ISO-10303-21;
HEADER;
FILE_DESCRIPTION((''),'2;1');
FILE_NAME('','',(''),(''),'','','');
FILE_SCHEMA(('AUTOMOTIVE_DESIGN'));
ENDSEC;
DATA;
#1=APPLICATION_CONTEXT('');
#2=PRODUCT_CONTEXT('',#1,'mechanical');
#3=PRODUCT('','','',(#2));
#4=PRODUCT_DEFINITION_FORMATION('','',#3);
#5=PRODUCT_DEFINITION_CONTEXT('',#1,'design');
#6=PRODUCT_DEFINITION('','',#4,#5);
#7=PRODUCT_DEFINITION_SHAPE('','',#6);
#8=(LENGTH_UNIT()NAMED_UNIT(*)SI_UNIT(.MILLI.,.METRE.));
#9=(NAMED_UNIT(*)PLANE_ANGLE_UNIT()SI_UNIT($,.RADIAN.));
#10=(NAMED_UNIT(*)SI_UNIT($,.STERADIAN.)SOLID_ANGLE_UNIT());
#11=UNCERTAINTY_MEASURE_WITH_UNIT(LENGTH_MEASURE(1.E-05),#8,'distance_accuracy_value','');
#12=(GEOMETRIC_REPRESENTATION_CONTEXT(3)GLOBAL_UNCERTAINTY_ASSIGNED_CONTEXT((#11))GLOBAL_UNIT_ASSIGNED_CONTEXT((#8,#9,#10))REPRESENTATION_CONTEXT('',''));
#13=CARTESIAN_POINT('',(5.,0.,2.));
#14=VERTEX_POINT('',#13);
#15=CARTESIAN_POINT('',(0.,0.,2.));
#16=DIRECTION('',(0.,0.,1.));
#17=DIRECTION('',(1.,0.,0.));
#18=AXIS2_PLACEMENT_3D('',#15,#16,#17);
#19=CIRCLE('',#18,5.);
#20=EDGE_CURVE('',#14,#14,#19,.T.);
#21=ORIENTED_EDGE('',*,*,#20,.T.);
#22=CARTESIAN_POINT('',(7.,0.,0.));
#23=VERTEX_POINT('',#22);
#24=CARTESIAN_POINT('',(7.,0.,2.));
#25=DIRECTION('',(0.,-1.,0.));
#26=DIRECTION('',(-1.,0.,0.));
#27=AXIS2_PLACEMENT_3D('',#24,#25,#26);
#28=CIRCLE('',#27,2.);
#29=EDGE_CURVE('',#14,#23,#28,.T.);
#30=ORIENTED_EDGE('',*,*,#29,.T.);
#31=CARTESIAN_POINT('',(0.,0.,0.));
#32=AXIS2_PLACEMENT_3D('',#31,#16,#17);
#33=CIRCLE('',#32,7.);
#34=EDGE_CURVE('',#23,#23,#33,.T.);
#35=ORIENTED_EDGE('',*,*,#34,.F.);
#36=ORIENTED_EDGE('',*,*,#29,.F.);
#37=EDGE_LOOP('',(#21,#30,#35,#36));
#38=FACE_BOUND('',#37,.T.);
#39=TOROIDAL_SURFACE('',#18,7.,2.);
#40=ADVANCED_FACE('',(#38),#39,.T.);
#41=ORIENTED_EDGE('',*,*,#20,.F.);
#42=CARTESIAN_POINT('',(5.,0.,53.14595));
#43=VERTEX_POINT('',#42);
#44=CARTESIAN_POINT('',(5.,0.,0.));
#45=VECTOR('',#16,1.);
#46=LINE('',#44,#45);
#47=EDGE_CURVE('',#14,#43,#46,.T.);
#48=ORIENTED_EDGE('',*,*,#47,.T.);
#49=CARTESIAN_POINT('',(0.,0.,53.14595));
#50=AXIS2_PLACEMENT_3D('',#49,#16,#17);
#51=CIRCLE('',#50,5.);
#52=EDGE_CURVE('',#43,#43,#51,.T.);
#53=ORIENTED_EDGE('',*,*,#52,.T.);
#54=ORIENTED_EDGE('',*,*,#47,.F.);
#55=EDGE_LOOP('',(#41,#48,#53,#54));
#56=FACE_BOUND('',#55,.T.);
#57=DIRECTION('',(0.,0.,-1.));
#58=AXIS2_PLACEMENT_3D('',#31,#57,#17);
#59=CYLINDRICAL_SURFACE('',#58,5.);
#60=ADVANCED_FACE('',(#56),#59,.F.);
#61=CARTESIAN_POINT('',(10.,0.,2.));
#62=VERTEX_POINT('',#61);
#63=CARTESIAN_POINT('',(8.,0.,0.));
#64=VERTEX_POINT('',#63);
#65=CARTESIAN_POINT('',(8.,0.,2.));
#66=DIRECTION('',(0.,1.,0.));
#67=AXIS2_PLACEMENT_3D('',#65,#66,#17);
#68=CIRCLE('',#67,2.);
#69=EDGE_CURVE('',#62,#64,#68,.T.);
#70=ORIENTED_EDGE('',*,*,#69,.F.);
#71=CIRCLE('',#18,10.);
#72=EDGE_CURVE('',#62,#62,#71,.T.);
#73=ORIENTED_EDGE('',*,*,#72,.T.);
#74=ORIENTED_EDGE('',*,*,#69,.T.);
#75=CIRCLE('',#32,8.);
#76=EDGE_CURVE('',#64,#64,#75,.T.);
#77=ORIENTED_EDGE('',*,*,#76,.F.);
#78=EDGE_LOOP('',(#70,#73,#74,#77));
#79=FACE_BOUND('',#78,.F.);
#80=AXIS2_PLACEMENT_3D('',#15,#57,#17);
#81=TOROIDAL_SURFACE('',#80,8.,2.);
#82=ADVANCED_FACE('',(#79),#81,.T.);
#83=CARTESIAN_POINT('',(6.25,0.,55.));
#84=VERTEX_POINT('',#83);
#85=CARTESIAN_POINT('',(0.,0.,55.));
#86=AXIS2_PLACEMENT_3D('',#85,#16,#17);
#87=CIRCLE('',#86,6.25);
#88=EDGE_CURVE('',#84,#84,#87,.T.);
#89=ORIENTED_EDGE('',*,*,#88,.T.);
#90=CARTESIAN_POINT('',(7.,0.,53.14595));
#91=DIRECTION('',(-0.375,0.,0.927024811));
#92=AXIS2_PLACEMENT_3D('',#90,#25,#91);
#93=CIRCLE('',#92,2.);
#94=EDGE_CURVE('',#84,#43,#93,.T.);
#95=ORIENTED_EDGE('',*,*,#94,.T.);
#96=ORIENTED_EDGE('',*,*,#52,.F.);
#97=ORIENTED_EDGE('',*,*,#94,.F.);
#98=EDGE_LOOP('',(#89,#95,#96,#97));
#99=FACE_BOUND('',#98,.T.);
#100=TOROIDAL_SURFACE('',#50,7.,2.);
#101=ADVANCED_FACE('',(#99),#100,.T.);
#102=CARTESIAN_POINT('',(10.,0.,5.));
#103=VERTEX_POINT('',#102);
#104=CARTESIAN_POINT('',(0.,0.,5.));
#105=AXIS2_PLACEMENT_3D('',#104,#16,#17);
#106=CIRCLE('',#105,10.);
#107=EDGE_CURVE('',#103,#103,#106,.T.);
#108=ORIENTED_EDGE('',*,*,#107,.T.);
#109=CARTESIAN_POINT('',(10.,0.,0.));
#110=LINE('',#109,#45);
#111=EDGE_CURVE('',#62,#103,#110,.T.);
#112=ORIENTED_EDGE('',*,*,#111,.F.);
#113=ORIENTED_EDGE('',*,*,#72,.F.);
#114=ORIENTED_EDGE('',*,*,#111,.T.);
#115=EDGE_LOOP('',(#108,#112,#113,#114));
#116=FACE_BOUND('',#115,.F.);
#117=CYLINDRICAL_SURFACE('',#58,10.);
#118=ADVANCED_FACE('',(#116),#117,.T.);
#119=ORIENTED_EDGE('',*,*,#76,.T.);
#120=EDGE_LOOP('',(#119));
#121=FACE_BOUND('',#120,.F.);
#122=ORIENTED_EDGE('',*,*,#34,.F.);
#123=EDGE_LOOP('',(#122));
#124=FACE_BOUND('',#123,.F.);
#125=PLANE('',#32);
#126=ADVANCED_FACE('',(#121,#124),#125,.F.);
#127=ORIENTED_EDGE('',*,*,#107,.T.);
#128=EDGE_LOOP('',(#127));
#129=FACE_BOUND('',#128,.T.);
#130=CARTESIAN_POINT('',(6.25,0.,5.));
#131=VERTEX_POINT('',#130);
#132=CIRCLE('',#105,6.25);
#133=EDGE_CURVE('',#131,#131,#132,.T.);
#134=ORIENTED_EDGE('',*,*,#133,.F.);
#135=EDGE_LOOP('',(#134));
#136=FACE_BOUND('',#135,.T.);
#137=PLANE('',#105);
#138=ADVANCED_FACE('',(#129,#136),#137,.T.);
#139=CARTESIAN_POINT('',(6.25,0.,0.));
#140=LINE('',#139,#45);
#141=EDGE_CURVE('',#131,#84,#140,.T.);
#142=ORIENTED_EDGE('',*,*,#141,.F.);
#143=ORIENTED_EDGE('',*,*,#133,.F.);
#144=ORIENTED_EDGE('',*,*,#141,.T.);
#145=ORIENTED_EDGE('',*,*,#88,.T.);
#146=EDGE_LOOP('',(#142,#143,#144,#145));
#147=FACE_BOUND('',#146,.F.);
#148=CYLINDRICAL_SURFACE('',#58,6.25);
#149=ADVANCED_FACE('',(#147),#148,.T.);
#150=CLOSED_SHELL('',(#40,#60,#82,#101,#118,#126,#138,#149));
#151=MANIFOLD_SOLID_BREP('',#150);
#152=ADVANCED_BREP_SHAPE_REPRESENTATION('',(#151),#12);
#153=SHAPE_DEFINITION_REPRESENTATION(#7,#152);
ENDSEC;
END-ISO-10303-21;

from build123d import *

# Parameters (mm, degrees)
F0_R     = 10
F0_R_2   = 6.25
F1_DEPTH = 5
F0_R_3   = 5
F2_DEPTH = 55
F3_DEPTH = 51


# Not quite as in the source:
# - a fillet or chamfer that OpenCascade refuses, or shapes differently, is made with other operations: its cross-section is extruded or revolved along the edge and cut away or added


with BuildPart() as f1:
    # F0 (on Top) → F1 (new body)
    with BuildSketch(Plane.XY):
        Circle(F0_R)
        Circle(F0_R_2, mode=Mode.SUBTRACT)
    extrude(amount=F1_DEPTH)

    # F0 (on Top) → F2 (join)
    with BuildSketch(Plane.XY):
        Circle(F0_R_2)
        Circle(F0_R_3, mode=Mode.SUBTRACT)
    extrude(amount=F2_DEPTH)

    # F0 (on Top) → F3 (cut)
    with BuildSketch(Plane.XY):
        Circle(F0_R_3)
    extrude(amount=F3_DEPTH, mode=Mode.SUBTRACT)

    # F4: fillet of radius 2 on 3 edges, made by hand

    # F4_s1 → F4_t2 (revolve, cut)
    with BuildSketch(Plane.XZ):
        with BuildLine():
            ThreePointArc((5, 2), (5.5857864376, 0.5857864376), (7, 0))
            Line((7, 0), (5, 0))
            Line((5, 0), (5, 2))
        make_face()
    revolve(axis=Axis((0, 0, 0), (0, 0, 1)), mode=Mode.SUBTRACT)

    # F4_s3 → F4_t4 (revolve, cut)
    with BuildSketch(Plane.XZ):
        with BuildLine():
            ThreePointArc((6.25, 55), (5.3416876048, 54.263984367), (5, 53.1459503782))
            Line((5, 53.1459503782), (5, 55))
            Line((5, 55), (6.25, 55))
        make_face()
    revolve(axis=Axis((0, 0, 55), (0, 0, 1)), mode=Mode.SUBTRACT)

    # F4_s5 → F4_t6 (revolve, cut)
    with BuildSketch(Plane.XZ):
        with BuildLine():
            ThreePointArc((10, 2), (9.4142135624, 0.5857864376), (8, 0))
            Line((8, 0), (10, 0))
            Line((10, 0), (10, 2))
        make_face()
    revolve(axis=Axis((0, 0, 0), (0, 0, 1)), mode=Mode.SUBTRACT)


solid = f1.part
